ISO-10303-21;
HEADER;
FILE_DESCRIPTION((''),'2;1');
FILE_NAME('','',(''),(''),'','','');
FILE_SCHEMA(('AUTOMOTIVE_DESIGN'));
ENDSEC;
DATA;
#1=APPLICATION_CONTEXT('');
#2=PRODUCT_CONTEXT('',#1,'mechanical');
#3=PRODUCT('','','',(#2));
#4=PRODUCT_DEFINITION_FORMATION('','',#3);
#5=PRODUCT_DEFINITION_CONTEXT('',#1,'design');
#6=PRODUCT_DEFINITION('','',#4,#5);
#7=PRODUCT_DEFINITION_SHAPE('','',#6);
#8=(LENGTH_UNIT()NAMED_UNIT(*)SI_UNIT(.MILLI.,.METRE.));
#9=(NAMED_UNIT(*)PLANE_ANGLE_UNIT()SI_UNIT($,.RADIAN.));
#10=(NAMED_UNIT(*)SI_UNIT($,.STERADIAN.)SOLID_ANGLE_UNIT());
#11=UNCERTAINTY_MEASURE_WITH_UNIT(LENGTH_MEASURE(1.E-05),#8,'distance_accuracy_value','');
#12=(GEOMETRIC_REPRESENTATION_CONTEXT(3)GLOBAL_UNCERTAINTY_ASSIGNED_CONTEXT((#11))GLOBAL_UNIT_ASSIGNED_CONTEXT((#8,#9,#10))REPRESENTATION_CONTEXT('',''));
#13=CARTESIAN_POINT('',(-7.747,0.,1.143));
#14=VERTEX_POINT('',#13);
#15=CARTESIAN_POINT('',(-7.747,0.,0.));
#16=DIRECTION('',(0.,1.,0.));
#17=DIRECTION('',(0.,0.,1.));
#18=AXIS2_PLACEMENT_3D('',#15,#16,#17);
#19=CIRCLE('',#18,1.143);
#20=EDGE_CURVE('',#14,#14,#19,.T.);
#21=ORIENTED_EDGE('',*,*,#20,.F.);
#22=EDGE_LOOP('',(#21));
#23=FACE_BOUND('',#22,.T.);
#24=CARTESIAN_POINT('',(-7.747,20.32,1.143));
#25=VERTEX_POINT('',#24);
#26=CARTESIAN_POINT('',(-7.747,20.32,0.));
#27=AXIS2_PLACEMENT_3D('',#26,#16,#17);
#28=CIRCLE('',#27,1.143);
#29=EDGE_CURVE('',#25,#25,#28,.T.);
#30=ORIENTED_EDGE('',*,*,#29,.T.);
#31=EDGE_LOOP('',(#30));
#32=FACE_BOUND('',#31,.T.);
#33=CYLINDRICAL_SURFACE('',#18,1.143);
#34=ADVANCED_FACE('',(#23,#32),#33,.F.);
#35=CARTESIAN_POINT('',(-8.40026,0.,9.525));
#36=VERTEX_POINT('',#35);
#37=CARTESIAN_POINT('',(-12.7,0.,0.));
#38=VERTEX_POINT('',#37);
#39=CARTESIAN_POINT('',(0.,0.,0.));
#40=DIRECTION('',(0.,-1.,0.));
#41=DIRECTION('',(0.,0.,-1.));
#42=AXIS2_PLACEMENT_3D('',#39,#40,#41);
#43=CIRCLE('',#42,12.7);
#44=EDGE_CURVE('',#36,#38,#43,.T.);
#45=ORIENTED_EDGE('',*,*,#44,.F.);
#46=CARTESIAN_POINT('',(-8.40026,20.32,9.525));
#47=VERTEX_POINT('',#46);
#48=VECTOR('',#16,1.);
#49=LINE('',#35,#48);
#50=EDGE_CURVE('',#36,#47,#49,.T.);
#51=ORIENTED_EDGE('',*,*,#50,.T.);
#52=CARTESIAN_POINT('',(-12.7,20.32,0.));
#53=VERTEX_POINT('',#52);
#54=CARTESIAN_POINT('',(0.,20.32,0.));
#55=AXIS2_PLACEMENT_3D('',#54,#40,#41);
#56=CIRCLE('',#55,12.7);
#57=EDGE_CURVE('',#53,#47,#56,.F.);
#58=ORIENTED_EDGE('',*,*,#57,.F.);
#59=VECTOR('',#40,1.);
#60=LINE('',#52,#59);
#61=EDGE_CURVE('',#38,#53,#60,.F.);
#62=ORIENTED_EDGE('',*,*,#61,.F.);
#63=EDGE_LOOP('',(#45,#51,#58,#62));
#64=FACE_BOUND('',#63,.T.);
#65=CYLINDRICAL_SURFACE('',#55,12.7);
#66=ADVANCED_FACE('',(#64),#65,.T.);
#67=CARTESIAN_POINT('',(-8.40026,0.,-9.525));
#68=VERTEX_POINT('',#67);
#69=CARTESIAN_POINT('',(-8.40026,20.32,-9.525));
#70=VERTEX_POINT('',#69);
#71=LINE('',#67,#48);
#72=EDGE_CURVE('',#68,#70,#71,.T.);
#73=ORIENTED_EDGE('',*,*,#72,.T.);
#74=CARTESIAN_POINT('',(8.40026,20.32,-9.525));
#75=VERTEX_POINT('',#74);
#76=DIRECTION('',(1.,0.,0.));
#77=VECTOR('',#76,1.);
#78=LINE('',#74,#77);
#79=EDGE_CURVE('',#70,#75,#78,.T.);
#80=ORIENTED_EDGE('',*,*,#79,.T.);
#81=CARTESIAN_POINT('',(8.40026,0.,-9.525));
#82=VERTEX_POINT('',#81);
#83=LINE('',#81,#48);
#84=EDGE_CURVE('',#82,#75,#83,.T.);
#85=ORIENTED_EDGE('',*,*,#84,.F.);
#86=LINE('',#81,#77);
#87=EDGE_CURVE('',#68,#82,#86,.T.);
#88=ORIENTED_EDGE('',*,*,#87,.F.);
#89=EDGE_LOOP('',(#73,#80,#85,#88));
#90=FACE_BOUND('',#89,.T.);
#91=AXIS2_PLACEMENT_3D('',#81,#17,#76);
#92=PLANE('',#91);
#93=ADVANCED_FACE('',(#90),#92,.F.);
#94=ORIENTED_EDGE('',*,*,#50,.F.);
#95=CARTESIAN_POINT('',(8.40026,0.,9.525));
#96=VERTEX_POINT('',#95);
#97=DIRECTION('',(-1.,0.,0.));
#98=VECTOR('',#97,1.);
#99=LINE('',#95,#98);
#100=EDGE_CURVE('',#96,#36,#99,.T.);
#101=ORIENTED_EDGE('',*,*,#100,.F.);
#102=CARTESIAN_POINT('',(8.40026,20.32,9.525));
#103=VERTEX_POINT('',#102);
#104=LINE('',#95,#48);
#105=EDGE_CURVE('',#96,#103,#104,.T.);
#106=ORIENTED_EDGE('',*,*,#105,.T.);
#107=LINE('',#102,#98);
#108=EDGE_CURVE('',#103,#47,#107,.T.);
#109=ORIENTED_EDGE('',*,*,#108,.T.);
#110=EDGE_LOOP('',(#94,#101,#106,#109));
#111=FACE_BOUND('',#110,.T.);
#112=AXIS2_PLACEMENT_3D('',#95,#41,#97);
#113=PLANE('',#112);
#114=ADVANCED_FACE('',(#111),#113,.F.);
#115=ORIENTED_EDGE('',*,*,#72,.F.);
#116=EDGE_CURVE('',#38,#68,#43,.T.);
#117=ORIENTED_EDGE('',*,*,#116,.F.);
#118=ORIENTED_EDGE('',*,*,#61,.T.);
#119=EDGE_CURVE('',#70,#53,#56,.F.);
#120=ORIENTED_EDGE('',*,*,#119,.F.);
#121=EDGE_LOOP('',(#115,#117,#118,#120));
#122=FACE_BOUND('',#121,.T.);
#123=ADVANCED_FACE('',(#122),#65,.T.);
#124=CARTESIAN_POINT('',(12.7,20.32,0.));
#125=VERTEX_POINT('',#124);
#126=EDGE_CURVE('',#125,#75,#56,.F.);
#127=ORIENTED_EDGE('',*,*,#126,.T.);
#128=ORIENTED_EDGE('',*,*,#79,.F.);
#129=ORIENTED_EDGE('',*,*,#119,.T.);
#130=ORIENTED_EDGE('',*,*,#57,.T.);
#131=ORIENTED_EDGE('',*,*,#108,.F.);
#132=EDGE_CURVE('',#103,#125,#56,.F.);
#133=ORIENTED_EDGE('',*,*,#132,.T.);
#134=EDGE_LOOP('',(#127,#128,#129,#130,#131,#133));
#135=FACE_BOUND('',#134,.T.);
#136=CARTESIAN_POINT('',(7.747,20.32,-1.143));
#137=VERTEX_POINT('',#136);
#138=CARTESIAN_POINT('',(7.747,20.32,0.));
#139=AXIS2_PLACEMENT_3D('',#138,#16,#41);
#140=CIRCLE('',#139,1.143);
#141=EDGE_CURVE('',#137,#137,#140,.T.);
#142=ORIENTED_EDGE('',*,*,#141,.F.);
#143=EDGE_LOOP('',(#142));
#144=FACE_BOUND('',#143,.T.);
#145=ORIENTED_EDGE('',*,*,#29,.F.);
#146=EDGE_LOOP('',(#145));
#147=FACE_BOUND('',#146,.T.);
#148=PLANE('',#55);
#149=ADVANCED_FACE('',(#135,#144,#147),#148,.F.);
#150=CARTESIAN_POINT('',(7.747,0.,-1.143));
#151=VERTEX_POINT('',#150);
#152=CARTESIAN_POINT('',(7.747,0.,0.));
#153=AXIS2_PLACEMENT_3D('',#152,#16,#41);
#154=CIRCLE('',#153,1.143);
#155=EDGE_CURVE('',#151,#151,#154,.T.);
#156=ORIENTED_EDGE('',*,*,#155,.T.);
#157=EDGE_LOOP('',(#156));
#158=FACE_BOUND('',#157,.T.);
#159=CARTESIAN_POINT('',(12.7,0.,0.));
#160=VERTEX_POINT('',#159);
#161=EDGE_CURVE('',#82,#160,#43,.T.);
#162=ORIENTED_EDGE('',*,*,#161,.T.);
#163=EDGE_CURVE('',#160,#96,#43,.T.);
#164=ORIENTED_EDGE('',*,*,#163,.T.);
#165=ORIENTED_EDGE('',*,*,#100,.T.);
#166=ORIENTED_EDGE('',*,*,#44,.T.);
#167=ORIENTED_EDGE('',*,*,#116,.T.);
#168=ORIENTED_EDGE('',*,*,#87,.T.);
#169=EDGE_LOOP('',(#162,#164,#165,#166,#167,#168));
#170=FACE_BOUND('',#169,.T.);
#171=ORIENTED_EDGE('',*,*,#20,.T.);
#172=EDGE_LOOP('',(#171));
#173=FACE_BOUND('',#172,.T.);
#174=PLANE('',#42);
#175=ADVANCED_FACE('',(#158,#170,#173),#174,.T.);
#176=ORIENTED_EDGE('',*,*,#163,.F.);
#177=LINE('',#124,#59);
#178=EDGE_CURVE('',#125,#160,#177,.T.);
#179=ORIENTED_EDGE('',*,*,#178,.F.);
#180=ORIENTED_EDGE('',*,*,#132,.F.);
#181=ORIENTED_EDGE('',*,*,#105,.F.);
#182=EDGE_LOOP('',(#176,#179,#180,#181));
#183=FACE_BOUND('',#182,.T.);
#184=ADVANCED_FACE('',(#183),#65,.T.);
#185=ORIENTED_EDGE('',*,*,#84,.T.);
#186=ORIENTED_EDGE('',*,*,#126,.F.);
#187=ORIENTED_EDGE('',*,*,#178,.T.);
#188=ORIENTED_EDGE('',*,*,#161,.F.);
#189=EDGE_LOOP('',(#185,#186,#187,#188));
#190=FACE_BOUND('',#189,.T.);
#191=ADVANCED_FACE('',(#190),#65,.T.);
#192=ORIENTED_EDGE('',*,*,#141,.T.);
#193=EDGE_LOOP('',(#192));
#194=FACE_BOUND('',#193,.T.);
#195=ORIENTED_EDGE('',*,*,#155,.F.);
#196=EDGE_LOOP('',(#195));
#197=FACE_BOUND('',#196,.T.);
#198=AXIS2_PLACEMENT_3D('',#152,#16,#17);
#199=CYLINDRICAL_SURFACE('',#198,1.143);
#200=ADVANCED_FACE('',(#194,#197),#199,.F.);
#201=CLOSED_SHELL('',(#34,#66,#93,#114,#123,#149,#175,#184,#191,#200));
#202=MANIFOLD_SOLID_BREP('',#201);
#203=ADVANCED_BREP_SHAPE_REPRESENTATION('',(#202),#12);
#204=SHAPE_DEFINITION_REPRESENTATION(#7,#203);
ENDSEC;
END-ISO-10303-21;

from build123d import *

# Parameters (mm, degrees)
SKETCH1_W                = 25.4
SKETCH1_H                = 25.4
BOSS_EXTRUDE1_DEPTH      = 20.32
SKETCH2_R                = 1.143
CUT_EXTRUDE1_DEPTH       = 28.11977876
FILLET1_R                = 12.7
CUT_EXTRUDE2_START       = -12.7
CUT_EXTRUDE2_OUTLINE_W   = 20
CUT_EXTRUDE2_OUTLINE_H   = 20.32
CUT_EXTRUDE2_DEPTH       = 3.175
CUT_EXTRUDE2_START_2     = 9.525
CUT_EXTRUDE2_2_OUTLINE_W = 20
CUT_EXTRUDE2_2_OUTLINE_H = 20.32
CUT_EXTRUDE2_2_DEPTH     = 3.175


# Read off the part's stored shape, not the designer's step: Cut-Extrude2
with BuildPart() as part:
    # Sketch1 → Boss-Extrude1 (new body)
    with BuildSketch(Plane(origin=(0, 0, 0), x_dir=(1, 0, 0), z_dir=(0, 1, 0))):
        Rectangle(SKETCH1_W, SKETCH1_H)
    extrude(amount=BOSS_EXTRUDE1_DEPTH)

    # Sketch2 → Cut-Extrude1 (cut, through all)
    with BuildSketch(Plane(origin=(0, 20.32, 0), x_dir=(1, 0, 0), z_dir=(0, 1, 0))):
        with Locations(Location((-7.747, 0, 0), (0, 0, 270))):
            Circle(SKETCH2_R)
        with Locations(Location((7.747, 0, 0), (0, 0, 90))):
            Circle(SKETCH2_R)
    extrude(amount=-CUT_EXTRUDE1_DEPTH, mode=Mode.SUBTRACT)

    # Fillet1
    fillet1_edges = [part.edges().sort_by_distance(p)[0] for p in [
        (-12.7, 10.16, -12.7),
        (12.7, 10.16, -12.7),
        (12.7, 10.16, 12.7),
        (-12.7, 10.16, 12.7),
    ]]
    fillet(fillet1_edges, radius=FILLET1_R - 0.0001)  # a hair under: the kernel refuses the full size

    # Cut-Extrude2 outline → Cut-Extrude2 (cut)
    with BuildSketch(Plane.XY.offset(CUT_EXTRUDE2_START)):
        with Locations((0, 10.16)):
            Rectangle(CUT_EXTRUDE2_OUTLINE_W, CUT_EXTRUDE2_OUTLINE_H)
    extrude(amount=CUT_EXTRUDE2_DEPTH, mode=Mode.SUBTRACT)

    # Cut-Extrude2 2 outline → Cut-Extrude2 2 (cut)
    with BuildSketch(Plane.XY.offset(CUT_EXTRUDE2_START_2)):
        with Locations((0, 10.16)):
            Rectangle(CUT_EXTRUDE2_2_OUTLINE_W, CUT_EXTRUDE2_2_OUTLINE_H)
    extrude(amount=CUT_EXTRUDE2_2_DEPTH, mode=Mode.SUBTRACT)


solid = part.part
